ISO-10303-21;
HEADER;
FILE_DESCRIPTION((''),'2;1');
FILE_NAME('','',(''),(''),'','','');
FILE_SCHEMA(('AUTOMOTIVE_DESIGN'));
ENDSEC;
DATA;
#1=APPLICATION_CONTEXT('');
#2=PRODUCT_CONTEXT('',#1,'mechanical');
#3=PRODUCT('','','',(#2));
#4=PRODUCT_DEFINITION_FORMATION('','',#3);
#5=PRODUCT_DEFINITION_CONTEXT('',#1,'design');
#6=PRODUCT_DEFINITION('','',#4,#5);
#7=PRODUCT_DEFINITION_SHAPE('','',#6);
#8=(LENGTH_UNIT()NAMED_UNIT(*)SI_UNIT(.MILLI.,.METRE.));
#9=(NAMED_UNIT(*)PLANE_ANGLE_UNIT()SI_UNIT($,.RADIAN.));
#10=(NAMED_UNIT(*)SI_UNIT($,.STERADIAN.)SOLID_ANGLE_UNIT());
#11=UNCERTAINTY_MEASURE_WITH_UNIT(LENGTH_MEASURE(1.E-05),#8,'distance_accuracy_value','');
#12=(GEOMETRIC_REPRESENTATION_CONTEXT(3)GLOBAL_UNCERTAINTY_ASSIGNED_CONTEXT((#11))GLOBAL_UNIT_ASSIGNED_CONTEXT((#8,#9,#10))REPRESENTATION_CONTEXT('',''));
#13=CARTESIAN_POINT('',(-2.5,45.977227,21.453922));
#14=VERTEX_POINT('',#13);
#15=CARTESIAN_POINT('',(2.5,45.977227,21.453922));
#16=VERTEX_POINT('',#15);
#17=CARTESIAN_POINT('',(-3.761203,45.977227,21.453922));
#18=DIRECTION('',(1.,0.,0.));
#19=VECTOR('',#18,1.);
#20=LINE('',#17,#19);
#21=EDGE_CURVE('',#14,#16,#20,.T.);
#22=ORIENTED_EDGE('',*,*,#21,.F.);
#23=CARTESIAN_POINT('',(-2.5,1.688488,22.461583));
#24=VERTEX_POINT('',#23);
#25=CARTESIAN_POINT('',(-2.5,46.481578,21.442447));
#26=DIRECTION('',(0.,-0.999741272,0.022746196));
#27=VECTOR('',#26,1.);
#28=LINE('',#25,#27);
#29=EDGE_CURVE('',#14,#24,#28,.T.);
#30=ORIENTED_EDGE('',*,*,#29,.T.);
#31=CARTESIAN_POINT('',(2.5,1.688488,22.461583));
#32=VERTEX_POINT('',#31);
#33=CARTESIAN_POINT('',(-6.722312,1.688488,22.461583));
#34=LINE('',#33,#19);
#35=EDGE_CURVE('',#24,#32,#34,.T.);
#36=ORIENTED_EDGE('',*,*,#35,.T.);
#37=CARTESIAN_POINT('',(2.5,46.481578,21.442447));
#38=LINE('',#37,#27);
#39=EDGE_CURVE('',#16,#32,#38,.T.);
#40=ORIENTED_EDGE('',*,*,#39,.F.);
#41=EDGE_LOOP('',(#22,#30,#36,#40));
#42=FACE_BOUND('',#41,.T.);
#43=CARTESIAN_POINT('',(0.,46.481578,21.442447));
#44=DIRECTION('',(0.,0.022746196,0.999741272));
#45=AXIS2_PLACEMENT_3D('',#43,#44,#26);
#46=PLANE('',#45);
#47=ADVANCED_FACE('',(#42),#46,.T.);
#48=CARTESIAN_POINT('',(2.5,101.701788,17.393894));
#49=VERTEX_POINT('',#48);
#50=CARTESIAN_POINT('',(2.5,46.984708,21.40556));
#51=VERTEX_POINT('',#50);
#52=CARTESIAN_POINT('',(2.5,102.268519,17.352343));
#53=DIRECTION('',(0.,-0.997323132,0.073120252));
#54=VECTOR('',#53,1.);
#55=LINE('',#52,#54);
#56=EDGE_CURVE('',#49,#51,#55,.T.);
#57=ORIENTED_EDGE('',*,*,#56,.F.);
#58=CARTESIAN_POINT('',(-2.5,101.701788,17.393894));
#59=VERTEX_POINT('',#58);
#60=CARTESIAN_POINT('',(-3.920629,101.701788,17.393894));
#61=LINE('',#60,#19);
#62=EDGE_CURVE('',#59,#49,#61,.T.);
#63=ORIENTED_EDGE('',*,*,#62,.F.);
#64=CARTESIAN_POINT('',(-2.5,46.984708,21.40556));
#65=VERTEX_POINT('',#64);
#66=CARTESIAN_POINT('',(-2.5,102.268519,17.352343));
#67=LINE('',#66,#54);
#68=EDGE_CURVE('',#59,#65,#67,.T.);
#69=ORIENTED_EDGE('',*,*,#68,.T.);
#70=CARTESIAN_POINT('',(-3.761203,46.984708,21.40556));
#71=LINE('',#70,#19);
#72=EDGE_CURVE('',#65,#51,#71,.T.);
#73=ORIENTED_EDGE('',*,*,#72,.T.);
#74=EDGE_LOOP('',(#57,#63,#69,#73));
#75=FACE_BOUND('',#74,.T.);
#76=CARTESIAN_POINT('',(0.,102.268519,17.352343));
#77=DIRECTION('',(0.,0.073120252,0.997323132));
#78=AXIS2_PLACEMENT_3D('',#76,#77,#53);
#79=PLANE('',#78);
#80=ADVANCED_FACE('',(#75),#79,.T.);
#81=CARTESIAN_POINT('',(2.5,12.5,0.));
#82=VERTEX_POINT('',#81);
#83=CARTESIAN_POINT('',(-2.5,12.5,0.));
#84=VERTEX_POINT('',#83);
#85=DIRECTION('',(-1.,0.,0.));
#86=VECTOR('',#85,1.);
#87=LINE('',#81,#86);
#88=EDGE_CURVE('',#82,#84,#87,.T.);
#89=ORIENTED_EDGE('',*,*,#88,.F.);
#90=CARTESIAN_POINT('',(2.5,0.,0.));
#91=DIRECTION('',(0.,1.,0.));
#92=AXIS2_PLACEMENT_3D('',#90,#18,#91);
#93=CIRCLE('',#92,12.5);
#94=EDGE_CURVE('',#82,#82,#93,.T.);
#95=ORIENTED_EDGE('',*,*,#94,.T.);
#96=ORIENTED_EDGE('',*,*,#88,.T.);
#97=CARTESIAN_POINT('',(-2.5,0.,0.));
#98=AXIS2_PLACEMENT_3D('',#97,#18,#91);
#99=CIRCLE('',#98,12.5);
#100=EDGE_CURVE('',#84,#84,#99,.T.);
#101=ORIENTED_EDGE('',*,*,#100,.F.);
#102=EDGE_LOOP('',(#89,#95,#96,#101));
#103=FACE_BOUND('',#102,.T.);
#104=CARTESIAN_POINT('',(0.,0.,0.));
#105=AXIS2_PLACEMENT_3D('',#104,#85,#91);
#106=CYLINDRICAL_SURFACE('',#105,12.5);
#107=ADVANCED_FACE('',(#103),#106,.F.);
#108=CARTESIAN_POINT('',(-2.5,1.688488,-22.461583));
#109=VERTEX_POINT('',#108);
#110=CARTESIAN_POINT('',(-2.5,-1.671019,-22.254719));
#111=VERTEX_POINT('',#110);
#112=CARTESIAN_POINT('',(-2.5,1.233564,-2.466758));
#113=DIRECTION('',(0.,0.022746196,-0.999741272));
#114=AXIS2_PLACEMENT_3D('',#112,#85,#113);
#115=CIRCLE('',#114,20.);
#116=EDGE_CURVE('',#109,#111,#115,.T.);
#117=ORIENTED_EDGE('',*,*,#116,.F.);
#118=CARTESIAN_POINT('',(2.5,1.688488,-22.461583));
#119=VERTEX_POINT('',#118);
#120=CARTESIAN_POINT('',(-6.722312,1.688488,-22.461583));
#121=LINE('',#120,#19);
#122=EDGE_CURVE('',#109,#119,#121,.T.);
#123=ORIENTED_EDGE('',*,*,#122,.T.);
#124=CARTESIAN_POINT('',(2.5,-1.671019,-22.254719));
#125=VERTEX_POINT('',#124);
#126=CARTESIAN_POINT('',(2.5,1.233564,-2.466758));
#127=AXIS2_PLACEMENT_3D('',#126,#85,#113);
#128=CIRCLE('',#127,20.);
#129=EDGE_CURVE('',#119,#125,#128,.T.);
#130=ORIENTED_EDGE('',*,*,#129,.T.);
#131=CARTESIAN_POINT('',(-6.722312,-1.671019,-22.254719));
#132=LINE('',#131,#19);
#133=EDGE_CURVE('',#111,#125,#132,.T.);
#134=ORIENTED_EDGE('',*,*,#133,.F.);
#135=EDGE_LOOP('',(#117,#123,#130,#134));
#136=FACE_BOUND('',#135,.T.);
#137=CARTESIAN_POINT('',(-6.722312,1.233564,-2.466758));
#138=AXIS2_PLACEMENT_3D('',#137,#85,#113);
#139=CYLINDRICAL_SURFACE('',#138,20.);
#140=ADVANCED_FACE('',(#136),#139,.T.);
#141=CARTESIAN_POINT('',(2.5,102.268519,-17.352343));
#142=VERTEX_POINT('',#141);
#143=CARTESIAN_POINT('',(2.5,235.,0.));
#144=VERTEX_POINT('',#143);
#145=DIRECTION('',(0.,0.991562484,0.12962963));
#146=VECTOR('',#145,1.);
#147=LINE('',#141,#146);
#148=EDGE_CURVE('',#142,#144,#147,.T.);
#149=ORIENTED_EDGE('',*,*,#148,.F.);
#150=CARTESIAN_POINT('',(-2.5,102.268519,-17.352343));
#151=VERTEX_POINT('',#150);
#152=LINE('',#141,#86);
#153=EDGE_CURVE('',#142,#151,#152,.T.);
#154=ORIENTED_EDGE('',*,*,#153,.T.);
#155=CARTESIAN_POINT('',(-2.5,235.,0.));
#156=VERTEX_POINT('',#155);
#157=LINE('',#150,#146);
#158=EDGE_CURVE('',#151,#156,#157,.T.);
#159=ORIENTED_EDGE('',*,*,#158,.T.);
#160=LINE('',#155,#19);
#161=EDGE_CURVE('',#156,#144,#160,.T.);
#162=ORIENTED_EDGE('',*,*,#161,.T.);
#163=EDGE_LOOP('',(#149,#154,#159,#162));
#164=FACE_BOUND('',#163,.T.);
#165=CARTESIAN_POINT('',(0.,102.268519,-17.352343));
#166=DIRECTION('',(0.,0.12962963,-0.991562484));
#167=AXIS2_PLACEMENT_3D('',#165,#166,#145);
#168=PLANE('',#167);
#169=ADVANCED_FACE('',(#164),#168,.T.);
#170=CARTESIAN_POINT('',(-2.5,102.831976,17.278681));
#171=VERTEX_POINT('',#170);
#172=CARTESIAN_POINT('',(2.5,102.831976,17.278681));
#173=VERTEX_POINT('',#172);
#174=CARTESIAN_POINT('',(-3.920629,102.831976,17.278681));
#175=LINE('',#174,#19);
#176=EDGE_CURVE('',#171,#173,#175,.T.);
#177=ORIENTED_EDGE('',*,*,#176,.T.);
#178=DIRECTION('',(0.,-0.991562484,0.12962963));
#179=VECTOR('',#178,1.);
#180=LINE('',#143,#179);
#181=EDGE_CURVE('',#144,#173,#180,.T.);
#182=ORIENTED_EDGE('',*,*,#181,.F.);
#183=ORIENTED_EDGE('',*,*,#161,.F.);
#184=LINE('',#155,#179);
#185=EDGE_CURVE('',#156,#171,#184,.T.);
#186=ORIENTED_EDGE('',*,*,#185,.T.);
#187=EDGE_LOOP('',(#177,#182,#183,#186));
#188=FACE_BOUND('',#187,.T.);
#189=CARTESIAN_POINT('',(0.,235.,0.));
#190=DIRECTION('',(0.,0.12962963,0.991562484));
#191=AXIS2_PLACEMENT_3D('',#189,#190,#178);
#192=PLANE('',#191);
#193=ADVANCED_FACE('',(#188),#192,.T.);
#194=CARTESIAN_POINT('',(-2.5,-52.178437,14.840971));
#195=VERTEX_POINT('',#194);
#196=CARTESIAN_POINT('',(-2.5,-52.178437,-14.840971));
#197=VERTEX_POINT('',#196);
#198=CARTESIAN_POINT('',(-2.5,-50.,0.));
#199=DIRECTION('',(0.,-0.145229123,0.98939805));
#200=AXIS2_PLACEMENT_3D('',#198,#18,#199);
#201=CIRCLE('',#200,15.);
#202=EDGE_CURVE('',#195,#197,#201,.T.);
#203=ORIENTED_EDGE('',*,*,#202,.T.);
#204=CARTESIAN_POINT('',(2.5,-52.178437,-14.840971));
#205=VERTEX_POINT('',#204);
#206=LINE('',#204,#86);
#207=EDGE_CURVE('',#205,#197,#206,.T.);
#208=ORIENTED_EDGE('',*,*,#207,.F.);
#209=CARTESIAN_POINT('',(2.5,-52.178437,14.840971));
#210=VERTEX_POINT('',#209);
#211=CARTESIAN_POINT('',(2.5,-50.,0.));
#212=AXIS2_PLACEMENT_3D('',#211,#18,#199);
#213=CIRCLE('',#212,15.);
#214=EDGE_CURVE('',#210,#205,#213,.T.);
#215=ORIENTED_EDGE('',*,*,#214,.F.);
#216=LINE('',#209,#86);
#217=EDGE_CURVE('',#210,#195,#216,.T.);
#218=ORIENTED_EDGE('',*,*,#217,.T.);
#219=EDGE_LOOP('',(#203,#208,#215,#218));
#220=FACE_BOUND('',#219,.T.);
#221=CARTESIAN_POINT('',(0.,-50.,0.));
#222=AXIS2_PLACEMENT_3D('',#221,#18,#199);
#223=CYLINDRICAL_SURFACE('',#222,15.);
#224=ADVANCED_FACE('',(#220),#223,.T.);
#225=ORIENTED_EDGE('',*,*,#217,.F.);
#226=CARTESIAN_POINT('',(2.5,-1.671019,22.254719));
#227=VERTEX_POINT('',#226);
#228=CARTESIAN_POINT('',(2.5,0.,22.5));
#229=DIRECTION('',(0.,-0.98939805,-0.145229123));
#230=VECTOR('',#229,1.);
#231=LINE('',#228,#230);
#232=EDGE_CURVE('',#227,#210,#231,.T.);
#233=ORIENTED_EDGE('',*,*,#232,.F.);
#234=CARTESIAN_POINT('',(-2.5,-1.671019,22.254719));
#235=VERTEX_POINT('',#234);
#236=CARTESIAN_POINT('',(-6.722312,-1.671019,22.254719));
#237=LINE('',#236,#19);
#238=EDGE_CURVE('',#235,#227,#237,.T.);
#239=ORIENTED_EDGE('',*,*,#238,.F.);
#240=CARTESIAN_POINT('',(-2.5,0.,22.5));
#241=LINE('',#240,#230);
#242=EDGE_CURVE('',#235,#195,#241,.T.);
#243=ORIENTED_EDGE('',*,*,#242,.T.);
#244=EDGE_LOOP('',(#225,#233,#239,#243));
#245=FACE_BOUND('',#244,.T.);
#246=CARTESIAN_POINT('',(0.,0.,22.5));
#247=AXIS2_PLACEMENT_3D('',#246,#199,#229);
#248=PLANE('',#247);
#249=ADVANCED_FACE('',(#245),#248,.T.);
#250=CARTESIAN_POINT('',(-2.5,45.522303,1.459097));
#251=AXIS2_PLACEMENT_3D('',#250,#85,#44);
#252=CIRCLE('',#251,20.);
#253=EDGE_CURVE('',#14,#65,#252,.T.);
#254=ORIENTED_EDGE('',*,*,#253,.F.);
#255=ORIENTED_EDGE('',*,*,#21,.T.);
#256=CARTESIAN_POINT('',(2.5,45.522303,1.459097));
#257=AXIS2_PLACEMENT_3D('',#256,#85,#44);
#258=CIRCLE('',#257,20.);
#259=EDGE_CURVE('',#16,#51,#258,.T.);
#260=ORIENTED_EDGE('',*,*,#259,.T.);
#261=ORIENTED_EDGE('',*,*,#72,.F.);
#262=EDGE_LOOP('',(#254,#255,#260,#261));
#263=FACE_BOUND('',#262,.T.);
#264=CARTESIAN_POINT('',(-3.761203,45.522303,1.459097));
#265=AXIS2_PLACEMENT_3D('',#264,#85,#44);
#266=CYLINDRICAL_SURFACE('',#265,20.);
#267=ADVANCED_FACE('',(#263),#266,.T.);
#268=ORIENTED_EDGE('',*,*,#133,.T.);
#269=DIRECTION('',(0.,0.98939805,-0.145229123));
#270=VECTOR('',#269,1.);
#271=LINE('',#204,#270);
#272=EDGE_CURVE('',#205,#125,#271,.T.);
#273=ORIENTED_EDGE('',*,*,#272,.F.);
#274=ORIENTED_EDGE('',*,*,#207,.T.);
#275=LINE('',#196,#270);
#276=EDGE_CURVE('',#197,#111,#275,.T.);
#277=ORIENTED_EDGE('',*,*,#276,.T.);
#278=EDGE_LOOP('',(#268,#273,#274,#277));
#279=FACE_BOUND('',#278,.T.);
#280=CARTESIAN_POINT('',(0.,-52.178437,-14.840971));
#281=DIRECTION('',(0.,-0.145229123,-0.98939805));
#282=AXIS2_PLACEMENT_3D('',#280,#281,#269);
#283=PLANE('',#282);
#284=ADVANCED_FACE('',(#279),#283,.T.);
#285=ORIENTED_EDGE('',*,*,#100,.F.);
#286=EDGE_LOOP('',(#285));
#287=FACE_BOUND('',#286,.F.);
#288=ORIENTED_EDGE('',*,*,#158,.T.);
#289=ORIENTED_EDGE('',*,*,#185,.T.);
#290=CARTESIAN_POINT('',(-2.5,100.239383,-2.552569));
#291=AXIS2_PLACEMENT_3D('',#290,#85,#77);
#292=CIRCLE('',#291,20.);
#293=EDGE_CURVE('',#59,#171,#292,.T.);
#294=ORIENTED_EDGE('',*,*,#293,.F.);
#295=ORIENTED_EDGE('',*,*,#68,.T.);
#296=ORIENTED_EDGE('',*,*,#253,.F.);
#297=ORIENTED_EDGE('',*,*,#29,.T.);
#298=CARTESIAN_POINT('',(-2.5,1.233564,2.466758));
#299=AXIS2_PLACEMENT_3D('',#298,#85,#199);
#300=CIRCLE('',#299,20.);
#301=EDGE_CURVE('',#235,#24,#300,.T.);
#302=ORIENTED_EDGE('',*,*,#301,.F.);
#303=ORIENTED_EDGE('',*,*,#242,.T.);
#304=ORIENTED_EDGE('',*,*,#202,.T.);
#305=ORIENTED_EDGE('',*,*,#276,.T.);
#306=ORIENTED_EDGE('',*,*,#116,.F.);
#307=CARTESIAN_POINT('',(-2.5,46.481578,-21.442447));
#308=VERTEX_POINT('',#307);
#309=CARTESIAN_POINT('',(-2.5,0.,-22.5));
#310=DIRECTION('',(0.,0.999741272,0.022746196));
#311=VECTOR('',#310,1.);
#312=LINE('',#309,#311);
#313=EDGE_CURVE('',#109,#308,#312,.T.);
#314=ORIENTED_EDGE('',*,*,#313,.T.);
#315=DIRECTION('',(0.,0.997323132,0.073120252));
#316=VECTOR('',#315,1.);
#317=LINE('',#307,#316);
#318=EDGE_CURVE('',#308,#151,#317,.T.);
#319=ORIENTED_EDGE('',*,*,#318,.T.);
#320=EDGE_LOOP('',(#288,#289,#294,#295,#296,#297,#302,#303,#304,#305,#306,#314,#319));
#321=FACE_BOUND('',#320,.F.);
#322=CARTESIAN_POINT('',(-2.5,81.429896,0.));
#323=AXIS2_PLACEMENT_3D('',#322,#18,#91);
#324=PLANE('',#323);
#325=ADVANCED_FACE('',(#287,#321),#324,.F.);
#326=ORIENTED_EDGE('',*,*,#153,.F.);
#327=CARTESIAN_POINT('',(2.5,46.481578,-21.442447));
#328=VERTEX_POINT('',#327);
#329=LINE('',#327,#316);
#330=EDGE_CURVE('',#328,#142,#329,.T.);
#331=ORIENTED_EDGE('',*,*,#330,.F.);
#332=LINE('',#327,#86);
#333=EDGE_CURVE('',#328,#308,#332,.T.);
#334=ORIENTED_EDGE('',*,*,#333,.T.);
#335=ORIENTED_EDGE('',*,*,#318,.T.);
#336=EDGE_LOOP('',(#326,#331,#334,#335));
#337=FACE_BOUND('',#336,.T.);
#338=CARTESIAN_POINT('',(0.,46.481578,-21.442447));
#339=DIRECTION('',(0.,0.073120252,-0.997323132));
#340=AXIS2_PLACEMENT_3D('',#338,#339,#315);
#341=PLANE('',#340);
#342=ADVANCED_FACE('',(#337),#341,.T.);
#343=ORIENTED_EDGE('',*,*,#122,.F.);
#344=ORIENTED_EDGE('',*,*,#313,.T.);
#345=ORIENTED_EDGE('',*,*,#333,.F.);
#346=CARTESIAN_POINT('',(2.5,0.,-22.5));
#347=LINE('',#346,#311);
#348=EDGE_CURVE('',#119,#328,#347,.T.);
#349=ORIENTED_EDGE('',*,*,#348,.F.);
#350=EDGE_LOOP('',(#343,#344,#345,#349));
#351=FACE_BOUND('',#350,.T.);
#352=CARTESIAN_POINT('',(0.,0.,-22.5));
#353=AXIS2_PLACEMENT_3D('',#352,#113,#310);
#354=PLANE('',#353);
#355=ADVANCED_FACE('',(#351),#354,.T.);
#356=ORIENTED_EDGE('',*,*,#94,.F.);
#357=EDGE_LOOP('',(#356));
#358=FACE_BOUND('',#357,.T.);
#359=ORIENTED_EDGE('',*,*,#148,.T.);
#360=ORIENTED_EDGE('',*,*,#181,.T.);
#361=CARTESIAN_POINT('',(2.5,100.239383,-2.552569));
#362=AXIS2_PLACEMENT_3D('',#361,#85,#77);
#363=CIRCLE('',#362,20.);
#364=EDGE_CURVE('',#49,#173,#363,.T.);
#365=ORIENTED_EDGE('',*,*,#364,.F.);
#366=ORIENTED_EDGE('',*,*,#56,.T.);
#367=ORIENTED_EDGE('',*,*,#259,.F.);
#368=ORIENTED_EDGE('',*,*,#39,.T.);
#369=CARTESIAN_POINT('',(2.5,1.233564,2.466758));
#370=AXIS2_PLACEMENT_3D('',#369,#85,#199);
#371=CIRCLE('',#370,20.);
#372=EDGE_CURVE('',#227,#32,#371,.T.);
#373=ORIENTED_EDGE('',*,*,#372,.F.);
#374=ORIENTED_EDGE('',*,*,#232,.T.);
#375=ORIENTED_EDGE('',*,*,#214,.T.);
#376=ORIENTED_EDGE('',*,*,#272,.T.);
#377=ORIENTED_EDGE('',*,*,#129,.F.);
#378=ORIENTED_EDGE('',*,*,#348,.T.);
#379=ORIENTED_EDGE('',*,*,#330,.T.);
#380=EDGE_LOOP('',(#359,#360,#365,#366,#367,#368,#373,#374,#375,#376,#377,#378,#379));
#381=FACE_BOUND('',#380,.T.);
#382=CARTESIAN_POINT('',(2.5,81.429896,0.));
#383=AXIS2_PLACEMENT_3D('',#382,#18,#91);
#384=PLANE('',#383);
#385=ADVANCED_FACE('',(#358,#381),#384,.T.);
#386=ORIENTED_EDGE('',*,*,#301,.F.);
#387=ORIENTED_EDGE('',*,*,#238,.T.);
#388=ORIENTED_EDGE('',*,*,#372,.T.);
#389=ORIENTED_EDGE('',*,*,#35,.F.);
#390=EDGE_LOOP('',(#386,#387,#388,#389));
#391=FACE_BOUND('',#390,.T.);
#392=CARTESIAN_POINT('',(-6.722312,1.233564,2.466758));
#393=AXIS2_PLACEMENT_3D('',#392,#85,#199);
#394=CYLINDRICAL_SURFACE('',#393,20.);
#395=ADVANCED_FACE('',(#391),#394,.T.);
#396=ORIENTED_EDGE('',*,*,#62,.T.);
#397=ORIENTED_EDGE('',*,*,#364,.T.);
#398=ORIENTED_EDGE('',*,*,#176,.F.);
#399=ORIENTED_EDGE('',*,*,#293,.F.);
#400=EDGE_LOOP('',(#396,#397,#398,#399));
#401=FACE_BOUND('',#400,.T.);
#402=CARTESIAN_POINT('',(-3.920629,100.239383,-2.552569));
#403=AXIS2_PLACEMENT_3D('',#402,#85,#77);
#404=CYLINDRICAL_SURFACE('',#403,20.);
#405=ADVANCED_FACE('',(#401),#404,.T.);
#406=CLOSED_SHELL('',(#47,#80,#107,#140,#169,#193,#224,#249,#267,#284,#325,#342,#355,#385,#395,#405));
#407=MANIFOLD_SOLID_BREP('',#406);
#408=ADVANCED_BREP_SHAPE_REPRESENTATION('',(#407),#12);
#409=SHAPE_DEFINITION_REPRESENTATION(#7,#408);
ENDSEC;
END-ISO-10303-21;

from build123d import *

# Parameters (mm, degrees)
F0_R        = 12.5
F1_DEPTH    = 2.5
F2_T1_DEPTH = 13.4446230753
F2_T3_DEPTH = 7.5224052146
F2_T5_DEPTH = 7.8412582898


# Not quite as in the source:
# - a fillet or chamfer that OpenCascade refuses, or shapes differently, is made with other operations: its cross-section is extruded or revolved along the edge and cut away or added


with BuildPart() as f1:
    # F0 (on Right) → F1 (new body, symmetric)
    with BuildSketch(Plane.YZ):
        with BuildLine():
            Line((102.2685185185, -17.3523434651), (235, 0))
            Line((235, 0), (102.2685185185, 17.3523434651))
            Line((102.2685185185, 17.3523434651), (46.4815775576, 21.4424473282))
            Line((46.4815775576, 21.4424473282), (0, 22.5))
            Line((0, 22.5), (-52.1784368395, 14.8409707545))
            ThreePointArc((-52.1784368395, 14.8409707545), (-65, 0), (-52.1784368395, -14.8409707545))
            Line((-52.1784368395, -14.8409707545), (0, -22.5))
            Line((0, -22.5), (46.4815775576, -21.4424473282))
            Line((46.4815775576, -21.4424473282), (102.2685185185, -17.3523434651))
        make_face()
        Circle(F0_R, mode=Mode.SUBTRACT)
    extrude(amount=F1_DEPTH, both=True)

    # F2: fillet of radius 20 on 4 edges, made by hand

    # F2_s2 → F2_t1 (cut)
    with BuildSketch(Plane.YZ.offset(-6.7223115376)):
        with BuildLine():
            ThreePointArc((-1.6710187212, 22.25471896), (0.0043749886, 22.428949593), (1.6884876427, 22.4615833904))
            Line((1.6884876427, 22.4615833904), (0, 22.5))
            Line((0, 22.5), (-1.6710187212, 22.25471896))
        make_face()
        with BuildLine():
            ThreePointArc((1.6884876427, -22.4615833904), (0.0043749886, -22.428949593), (-1.6710187212, -22.25471896))
            Line((-1.6710187212, -22.25471896), (0, -22.5))
            Line((0, -22.5), (1.6884876427, -22.4615833904))
        make_face()
    extrude(amount=F2_T1_DEPTH, mode=Mode.SUBTRACT)

    # F2_s4 → F2_t3 (cut)
    with BuildSketch(Plane.YZ.offset(-3.7612026073)):
        with BuildLine():
            ThreePointArc((45.9772270381, 21.4539223527), (46.4812725326, 21.4360931288), (46.9847081711, 21.4055595471))
            Line((46.9847081711, 21.4055595471), (46.4815775576, 21.4424473282))
            Line((46.4815775576, 21.4424473282), (45.9772270381, 21.4539223527))
        make_face()
    extrude(amount=F2_T3_DEPTH, mode=Mode.SUBTRACT)

    # F2_s6 → F2_t5 (cut)
    with BuildSketch(Plane.YZ.offset(-3.9206291449)):
        with BuildLine():
            ThreePointArc((101.7017879955, 17.3938941697), (102.267699979, 17.3443139587), (102.8319755439, 17.2786812132))
            Line((102.8319755439, 17.2786812132), (102.2685185185, 17.3523434651))
            Line((102.2685185185, 17.3523434651), (101.7017879955, 17.3938941697))
        make_face()
    extrude(amount=F2_T5_DEPTH, mode=Mode.SUBTRACT)


solid = f1.part
